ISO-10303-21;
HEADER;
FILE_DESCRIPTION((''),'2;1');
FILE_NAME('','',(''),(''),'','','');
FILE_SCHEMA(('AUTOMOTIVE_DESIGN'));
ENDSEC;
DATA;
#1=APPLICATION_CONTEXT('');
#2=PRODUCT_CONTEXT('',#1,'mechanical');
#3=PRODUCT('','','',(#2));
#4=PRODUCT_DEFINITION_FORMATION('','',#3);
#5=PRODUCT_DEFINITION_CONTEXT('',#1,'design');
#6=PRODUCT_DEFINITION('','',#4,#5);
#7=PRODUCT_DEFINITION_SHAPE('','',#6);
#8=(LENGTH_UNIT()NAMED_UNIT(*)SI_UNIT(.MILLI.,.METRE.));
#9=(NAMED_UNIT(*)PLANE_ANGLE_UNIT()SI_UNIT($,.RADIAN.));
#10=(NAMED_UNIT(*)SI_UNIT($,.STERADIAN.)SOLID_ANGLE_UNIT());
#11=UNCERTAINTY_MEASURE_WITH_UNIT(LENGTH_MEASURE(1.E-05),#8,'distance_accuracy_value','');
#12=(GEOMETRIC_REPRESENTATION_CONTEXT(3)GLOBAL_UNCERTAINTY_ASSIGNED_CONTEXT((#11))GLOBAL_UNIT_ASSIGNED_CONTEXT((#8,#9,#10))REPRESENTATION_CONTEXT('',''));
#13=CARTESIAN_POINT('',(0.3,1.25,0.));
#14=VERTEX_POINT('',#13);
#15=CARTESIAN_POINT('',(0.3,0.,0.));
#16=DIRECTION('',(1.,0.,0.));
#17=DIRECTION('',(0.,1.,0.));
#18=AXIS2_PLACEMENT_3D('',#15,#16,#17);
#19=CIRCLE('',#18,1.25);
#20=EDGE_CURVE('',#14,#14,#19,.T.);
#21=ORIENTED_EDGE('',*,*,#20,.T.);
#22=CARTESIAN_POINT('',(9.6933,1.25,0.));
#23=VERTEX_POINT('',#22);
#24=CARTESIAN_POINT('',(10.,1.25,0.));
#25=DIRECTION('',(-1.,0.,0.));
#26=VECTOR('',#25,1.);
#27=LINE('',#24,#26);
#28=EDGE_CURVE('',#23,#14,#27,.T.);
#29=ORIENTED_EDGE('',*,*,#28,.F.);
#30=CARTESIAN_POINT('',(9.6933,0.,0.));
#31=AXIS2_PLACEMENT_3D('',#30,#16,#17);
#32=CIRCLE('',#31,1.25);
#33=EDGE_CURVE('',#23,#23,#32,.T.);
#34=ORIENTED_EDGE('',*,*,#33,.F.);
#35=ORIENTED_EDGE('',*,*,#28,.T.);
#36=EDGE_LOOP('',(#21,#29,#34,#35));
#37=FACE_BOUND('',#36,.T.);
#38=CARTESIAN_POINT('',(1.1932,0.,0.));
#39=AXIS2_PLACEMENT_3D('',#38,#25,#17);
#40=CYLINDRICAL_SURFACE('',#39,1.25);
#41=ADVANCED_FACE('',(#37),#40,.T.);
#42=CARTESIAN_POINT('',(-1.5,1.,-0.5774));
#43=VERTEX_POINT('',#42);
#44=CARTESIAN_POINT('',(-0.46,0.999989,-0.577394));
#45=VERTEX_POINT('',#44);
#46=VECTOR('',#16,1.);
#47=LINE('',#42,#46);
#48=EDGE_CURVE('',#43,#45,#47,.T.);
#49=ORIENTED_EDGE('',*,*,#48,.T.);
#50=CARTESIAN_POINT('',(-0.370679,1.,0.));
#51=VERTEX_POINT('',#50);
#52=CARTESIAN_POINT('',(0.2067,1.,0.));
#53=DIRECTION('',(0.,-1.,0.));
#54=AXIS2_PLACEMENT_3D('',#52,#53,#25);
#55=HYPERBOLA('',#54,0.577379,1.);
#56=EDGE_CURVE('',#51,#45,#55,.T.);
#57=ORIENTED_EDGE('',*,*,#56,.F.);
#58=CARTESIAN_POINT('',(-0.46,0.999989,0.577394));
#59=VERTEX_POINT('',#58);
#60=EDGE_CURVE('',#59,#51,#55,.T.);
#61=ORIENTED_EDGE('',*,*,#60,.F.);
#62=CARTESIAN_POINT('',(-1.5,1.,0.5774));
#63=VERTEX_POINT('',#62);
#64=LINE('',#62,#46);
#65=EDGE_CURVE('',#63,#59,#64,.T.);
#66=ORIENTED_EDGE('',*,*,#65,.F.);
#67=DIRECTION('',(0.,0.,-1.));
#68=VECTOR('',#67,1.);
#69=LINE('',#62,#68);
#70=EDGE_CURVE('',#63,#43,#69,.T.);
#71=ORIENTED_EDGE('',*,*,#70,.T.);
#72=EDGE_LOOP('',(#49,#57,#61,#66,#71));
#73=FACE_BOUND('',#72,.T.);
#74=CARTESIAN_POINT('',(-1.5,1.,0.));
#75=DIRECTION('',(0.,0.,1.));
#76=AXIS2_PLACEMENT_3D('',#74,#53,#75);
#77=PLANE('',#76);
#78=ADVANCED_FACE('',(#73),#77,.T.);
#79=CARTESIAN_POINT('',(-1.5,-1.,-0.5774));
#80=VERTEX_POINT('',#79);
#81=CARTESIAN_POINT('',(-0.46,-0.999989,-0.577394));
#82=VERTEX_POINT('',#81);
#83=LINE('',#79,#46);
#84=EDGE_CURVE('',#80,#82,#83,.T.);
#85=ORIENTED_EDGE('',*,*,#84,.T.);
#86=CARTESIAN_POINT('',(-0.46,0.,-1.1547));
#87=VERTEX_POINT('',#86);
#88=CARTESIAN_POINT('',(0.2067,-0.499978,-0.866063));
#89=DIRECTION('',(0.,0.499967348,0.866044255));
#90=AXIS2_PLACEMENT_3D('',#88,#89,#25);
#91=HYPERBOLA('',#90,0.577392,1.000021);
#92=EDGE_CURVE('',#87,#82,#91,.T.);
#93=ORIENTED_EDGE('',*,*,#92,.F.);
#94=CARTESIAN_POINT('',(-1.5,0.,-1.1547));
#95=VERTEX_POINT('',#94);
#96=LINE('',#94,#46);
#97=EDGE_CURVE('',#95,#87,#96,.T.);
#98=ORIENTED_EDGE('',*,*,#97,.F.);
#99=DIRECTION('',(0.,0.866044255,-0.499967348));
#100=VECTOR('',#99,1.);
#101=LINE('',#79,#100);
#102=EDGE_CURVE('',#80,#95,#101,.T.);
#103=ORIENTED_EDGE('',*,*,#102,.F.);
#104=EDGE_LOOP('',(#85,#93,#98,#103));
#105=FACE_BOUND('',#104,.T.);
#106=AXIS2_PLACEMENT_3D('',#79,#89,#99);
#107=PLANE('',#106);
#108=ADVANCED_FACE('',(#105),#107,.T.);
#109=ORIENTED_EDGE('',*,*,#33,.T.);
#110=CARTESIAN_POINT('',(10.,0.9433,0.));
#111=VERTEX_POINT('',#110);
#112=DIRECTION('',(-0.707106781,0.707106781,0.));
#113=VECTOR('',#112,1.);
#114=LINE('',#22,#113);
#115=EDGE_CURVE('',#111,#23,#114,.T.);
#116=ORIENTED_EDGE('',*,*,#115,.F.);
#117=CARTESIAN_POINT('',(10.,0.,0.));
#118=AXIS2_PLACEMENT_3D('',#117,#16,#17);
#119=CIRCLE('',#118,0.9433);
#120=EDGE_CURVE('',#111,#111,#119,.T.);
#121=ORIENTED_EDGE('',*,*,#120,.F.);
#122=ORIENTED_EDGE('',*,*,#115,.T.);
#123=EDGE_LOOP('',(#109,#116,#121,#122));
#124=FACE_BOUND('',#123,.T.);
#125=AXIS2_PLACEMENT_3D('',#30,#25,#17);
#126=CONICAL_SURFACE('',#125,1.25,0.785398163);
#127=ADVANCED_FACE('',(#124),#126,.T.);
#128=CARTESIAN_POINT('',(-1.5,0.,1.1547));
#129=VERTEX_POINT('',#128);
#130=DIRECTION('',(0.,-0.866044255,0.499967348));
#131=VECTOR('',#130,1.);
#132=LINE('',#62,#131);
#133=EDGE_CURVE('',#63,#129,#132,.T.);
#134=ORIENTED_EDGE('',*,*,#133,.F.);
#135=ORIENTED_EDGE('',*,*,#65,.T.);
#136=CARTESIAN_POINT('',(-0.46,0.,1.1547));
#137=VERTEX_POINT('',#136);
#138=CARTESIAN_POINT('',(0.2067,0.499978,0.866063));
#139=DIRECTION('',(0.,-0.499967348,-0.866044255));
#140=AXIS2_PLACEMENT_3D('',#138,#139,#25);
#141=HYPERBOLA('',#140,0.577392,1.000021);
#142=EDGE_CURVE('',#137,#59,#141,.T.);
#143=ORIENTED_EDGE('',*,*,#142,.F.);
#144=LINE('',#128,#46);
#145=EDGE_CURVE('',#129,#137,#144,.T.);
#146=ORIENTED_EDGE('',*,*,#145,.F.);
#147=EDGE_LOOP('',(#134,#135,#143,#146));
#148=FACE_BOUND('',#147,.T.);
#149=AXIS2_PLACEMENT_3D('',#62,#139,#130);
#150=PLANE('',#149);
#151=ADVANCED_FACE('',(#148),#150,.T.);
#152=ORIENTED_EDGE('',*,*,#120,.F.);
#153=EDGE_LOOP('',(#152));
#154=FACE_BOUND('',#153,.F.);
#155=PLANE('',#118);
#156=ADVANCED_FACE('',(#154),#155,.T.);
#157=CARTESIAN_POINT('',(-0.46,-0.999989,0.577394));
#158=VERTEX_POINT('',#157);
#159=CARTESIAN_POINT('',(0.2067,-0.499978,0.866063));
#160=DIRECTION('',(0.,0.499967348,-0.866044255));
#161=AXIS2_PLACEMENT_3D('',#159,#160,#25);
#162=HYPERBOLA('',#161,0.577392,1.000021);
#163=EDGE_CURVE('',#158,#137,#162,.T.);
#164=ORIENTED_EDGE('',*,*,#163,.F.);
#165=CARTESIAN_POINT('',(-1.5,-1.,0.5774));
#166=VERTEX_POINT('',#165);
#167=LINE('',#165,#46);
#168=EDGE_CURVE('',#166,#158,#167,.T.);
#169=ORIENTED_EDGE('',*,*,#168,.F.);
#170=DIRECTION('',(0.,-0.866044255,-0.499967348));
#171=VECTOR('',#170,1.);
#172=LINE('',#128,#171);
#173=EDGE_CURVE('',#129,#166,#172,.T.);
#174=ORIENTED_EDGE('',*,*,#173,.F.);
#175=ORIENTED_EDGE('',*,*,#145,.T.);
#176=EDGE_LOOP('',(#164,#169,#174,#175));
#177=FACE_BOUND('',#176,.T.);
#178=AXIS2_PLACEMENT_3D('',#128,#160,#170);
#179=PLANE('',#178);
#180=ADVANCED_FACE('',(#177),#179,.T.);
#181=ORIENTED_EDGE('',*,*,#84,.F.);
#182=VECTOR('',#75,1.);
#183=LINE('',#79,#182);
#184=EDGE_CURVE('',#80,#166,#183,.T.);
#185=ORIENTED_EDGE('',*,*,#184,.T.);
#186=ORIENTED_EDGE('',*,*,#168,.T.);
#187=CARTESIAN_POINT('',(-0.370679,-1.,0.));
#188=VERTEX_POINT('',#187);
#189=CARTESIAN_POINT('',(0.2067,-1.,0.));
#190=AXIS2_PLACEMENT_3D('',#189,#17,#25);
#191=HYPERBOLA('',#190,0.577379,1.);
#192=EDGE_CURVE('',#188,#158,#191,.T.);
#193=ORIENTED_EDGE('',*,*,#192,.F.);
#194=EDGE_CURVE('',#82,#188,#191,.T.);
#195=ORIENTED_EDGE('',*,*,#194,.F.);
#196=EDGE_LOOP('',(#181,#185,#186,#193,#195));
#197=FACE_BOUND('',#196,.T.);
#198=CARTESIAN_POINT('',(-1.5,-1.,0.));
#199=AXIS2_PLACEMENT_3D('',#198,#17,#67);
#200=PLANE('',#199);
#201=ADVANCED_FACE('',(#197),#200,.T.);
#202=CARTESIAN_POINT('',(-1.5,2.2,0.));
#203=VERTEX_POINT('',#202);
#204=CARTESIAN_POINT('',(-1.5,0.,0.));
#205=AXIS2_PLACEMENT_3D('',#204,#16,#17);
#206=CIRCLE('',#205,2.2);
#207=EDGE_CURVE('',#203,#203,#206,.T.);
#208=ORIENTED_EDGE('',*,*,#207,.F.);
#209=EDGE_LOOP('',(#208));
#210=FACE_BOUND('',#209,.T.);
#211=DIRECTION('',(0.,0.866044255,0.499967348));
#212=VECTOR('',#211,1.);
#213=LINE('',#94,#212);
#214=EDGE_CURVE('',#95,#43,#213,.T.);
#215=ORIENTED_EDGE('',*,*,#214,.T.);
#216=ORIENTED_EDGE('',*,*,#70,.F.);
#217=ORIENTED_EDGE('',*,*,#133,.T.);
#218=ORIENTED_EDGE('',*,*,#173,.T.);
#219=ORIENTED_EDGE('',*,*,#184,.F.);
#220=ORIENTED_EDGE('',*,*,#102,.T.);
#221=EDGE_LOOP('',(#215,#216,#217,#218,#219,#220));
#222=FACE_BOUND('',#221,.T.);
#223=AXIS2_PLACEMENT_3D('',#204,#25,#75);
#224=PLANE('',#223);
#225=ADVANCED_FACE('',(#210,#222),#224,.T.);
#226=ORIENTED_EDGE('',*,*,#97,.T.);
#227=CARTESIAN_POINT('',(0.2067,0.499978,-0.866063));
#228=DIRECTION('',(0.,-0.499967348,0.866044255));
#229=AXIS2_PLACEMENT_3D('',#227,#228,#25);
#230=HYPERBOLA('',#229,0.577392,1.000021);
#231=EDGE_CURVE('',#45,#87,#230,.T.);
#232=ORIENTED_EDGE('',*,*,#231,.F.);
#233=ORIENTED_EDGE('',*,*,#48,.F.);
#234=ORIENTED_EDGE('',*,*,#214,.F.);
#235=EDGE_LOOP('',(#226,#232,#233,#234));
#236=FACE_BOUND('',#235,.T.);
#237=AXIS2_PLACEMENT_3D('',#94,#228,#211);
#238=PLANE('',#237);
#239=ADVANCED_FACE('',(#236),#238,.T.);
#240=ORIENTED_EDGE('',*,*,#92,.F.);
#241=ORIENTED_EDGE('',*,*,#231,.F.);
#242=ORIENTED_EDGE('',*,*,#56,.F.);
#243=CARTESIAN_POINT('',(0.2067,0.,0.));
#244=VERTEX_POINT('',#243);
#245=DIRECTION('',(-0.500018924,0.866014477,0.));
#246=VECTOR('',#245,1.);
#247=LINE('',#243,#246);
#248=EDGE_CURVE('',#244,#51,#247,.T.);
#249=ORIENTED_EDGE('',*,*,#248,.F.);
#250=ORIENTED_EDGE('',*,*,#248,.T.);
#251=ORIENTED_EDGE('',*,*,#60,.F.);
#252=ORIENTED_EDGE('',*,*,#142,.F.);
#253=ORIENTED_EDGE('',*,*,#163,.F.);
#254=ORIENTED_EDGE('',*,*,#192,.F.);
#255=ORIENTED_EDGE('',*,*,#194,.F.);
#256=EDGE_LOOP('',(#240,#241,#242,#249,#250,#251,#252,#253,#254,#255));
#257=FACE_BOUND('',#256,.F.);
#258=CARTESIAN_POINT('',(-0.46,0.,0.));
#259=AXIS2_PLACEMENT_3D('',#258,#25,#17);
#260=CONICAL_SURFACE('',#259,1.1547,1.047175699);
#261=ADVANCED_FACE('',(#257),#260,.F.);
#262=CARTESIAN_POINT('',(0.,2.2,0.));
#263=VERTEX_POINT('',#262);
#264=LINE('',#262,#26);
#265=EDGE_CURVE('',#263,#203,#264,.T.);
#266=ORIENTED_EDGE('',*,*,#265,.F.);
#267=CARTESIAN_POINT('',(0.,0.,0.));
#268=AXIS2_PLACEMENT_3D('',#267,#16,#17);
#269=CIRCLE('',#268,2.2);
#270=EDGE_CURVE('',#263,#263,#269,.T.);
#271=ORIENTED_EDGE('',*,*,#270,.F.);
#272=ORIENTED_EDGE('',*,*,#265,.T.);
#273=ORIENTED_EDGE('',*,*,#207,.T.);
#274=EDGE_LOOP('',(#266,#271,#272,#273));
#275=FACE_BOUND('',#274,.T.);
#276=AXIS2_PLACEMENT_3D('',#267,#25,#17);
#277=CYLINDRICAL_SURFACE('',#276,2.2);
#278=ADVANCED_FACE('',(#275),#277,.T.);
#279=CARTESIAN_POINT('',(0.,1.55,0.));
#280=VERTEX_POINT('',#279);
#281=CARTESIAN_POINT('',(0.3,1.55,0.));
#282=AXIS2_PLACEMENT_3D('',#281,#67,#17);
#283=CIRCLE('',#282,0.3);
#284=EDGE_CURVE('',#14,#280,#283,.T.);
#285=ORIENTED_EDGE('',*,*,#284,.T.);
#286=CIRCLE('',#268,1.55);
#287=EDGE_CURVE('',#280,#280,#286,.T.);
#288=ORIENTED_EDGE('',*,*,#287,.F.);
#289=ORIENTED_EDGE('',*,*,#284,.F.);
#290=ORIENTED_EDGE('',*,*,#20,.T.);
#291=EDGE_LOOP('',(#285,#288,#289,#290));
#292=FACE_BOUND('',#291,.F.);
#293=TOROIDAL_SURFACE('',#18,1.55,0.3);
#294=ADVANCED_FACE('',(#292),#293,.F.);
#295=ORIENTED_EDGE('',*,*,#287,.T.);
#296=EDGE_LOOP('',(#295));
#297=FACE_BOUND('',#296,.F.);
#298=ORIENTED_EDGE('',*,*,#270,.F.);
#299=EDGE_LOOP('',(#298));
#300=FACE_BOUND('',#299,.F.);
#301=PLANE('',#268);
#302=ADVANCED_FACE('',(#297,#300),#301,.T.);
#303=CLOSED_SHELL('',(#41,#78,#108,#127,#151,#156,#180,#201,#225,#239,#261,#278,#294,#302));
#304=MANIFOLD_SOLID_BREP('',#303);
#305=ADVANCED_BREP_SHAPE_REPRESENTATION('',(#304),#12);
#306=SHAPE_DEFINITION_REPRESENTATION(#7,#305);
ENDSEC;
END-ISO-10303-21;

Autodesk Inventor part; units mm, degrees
ref_plane "YZ Plane" through (0, 0, 0) normal (1, 0, 0) x (0, 1, 0)
ref_plane "XZ Plane" through (0, 0, 0) normal (0, 1, 0) x (-1, 0, 0)
sketch "Sketch1" plane through (0, 0, 0) normal (0, 0, 1) x (1, 0, 0)
  line L0 (0.2067, 0) -> (10, 0)
  line L1 (10, 0) -> (10, 1.25)
  line L2 (10, 1.25) -> (1.5, 1.25)
  line L3 (1.5, 1.25) -> (1.1932, 1.25)
  line L4 (1.1932, 1.25) -> (0, 1.25)
  line L5 (0, 1.25) -> (0, 2.2)
  line L6 (0, 2.2) -> (-1.5, 2.2)
  line L7 (-1.5, 2.2) -> (-1.5, 1.1547)
  line L8 (-1.5, 1.1547) -> (-0.46, 1.1547)
  line L9 (-0.46, 1.1547) -> (0.2067, 0)
  line L10 (-3.8, 0) -> (12.3, 0) projected
  line L11 (0, -0.44) -> (0, 2.64) projected
  line L12 (1.5, 1.25) -> (0, 1.25) construction
  dimension "d1" = 8.5
  dimension "d2" = 0.3068
  dimension "d3" = 1.5
  dimension "d4" = 1.04
  dimension "d5" = 60
  dimension "d6" = 2.5
  dimension "d7" = 2.5
  dimension "d8" = 2.3094
  dimension "d9" = 4.4
  dimension "d26" = 10
revolve "Body" add sketch "Sketch1" angle 360 about axis through (0.2067, 0, 0) along (1, 0, 0) contours L9 L11 L4 L3 L2 L1 L0 | L9 L8 L7 L6 L5 L11
sketch "Sketch2" plane through (-1.5, 0, 0) normal (-1, 0, 0) x (0, 0, 1)
  circle A0 centre (0, 0) radius 1.1547 projected
  line L0 (0, -3.08) -> (0, 3.08) projected
  line L1 (-3.08, 0) -> (3.08, 0) projected
  line L2 (1.1547, 0) -> (0.5774, -1)
  line L3 (0.5774, -1) -> (-0.5774, -1)
  line L4 (-0.5774, -1) -> (-1.1547, 0)
  line L5 (-1.1547, 0) -> (-0.5774, 1)
  line L6 (-0.5774, 1) -> (0.5774, 1)
  line L7 (0.5774, 1) -> (1.1547, 0)
extrude "Slot" add sketch "Sketch2" against normal up to next contours L7 A0 | A0 L2 | L6 L0 A0 | A0 L0 L3 | L0 L6 A0 | A0 L3 L0 | L4 A0 | A0 L5
thread "Thread" size "M2.5x0.45" class "6g" standard "ISO Metric profile" length 8.5
chamfer "Chamfer1" distance 0.3067 distance2 0.3067 1 edges at (10, -1.25, 0) measured on face at (10, -0.2714, -0.6096)
ref_plane "Work Plane1" through (29, 0, 0) normal (0, -1, 0) x (1, 0, 0)
fillet "Fillet2" radius 0.3 1 edges at (0, -1.25, 0)
equation "\"d30\" = R"
equation "\"d13\" = GEL"
equation "\"d15\" = -0.5 * SPD + 0.5 * GD"
equation "\"d16\" = GUL"
equation "\"d1\" = GEL"
equation "\"d4\" = INTI"
equation "\"d8\" = 1.1547 * SW"
equation "\"d26\" = NLG"
equation "\"GD\" = NND"
equation "\"NLG\" = 10"
equation "\"GEL\" = 8.5"
equation "\"KOD\" = 5.7"
equation "\"KOH\" = 1.65"
equation "\"INTI\" = 1.04"
equation "\"GAL\" = 0.61345 * PTC"
equation "\"GUL\" = 0.61345 * PTC"
equation "\"BDM\" = NND"
equation "\"SW\" = 2"
equation "\"RR\" = 1.45"
equation "\"SPD\" = NND - 1.2269 * PTC"
equation "\"R\" = 0.3"
equation "\"TOA\" = 30deg"
equation "\"GD1\" = THREADDIA - 1.2269 * PTC"
equation "\"THREADDIA\" = 3"
equation "\"PTC\" = 0.5"
equation "\"NND\" = 3"
equation "\"KOH1\" = 0.2"
equation "\"E0\" = 2.303"
properties part number "ISO 7380-1 - M3 x 10" material "Steel"
